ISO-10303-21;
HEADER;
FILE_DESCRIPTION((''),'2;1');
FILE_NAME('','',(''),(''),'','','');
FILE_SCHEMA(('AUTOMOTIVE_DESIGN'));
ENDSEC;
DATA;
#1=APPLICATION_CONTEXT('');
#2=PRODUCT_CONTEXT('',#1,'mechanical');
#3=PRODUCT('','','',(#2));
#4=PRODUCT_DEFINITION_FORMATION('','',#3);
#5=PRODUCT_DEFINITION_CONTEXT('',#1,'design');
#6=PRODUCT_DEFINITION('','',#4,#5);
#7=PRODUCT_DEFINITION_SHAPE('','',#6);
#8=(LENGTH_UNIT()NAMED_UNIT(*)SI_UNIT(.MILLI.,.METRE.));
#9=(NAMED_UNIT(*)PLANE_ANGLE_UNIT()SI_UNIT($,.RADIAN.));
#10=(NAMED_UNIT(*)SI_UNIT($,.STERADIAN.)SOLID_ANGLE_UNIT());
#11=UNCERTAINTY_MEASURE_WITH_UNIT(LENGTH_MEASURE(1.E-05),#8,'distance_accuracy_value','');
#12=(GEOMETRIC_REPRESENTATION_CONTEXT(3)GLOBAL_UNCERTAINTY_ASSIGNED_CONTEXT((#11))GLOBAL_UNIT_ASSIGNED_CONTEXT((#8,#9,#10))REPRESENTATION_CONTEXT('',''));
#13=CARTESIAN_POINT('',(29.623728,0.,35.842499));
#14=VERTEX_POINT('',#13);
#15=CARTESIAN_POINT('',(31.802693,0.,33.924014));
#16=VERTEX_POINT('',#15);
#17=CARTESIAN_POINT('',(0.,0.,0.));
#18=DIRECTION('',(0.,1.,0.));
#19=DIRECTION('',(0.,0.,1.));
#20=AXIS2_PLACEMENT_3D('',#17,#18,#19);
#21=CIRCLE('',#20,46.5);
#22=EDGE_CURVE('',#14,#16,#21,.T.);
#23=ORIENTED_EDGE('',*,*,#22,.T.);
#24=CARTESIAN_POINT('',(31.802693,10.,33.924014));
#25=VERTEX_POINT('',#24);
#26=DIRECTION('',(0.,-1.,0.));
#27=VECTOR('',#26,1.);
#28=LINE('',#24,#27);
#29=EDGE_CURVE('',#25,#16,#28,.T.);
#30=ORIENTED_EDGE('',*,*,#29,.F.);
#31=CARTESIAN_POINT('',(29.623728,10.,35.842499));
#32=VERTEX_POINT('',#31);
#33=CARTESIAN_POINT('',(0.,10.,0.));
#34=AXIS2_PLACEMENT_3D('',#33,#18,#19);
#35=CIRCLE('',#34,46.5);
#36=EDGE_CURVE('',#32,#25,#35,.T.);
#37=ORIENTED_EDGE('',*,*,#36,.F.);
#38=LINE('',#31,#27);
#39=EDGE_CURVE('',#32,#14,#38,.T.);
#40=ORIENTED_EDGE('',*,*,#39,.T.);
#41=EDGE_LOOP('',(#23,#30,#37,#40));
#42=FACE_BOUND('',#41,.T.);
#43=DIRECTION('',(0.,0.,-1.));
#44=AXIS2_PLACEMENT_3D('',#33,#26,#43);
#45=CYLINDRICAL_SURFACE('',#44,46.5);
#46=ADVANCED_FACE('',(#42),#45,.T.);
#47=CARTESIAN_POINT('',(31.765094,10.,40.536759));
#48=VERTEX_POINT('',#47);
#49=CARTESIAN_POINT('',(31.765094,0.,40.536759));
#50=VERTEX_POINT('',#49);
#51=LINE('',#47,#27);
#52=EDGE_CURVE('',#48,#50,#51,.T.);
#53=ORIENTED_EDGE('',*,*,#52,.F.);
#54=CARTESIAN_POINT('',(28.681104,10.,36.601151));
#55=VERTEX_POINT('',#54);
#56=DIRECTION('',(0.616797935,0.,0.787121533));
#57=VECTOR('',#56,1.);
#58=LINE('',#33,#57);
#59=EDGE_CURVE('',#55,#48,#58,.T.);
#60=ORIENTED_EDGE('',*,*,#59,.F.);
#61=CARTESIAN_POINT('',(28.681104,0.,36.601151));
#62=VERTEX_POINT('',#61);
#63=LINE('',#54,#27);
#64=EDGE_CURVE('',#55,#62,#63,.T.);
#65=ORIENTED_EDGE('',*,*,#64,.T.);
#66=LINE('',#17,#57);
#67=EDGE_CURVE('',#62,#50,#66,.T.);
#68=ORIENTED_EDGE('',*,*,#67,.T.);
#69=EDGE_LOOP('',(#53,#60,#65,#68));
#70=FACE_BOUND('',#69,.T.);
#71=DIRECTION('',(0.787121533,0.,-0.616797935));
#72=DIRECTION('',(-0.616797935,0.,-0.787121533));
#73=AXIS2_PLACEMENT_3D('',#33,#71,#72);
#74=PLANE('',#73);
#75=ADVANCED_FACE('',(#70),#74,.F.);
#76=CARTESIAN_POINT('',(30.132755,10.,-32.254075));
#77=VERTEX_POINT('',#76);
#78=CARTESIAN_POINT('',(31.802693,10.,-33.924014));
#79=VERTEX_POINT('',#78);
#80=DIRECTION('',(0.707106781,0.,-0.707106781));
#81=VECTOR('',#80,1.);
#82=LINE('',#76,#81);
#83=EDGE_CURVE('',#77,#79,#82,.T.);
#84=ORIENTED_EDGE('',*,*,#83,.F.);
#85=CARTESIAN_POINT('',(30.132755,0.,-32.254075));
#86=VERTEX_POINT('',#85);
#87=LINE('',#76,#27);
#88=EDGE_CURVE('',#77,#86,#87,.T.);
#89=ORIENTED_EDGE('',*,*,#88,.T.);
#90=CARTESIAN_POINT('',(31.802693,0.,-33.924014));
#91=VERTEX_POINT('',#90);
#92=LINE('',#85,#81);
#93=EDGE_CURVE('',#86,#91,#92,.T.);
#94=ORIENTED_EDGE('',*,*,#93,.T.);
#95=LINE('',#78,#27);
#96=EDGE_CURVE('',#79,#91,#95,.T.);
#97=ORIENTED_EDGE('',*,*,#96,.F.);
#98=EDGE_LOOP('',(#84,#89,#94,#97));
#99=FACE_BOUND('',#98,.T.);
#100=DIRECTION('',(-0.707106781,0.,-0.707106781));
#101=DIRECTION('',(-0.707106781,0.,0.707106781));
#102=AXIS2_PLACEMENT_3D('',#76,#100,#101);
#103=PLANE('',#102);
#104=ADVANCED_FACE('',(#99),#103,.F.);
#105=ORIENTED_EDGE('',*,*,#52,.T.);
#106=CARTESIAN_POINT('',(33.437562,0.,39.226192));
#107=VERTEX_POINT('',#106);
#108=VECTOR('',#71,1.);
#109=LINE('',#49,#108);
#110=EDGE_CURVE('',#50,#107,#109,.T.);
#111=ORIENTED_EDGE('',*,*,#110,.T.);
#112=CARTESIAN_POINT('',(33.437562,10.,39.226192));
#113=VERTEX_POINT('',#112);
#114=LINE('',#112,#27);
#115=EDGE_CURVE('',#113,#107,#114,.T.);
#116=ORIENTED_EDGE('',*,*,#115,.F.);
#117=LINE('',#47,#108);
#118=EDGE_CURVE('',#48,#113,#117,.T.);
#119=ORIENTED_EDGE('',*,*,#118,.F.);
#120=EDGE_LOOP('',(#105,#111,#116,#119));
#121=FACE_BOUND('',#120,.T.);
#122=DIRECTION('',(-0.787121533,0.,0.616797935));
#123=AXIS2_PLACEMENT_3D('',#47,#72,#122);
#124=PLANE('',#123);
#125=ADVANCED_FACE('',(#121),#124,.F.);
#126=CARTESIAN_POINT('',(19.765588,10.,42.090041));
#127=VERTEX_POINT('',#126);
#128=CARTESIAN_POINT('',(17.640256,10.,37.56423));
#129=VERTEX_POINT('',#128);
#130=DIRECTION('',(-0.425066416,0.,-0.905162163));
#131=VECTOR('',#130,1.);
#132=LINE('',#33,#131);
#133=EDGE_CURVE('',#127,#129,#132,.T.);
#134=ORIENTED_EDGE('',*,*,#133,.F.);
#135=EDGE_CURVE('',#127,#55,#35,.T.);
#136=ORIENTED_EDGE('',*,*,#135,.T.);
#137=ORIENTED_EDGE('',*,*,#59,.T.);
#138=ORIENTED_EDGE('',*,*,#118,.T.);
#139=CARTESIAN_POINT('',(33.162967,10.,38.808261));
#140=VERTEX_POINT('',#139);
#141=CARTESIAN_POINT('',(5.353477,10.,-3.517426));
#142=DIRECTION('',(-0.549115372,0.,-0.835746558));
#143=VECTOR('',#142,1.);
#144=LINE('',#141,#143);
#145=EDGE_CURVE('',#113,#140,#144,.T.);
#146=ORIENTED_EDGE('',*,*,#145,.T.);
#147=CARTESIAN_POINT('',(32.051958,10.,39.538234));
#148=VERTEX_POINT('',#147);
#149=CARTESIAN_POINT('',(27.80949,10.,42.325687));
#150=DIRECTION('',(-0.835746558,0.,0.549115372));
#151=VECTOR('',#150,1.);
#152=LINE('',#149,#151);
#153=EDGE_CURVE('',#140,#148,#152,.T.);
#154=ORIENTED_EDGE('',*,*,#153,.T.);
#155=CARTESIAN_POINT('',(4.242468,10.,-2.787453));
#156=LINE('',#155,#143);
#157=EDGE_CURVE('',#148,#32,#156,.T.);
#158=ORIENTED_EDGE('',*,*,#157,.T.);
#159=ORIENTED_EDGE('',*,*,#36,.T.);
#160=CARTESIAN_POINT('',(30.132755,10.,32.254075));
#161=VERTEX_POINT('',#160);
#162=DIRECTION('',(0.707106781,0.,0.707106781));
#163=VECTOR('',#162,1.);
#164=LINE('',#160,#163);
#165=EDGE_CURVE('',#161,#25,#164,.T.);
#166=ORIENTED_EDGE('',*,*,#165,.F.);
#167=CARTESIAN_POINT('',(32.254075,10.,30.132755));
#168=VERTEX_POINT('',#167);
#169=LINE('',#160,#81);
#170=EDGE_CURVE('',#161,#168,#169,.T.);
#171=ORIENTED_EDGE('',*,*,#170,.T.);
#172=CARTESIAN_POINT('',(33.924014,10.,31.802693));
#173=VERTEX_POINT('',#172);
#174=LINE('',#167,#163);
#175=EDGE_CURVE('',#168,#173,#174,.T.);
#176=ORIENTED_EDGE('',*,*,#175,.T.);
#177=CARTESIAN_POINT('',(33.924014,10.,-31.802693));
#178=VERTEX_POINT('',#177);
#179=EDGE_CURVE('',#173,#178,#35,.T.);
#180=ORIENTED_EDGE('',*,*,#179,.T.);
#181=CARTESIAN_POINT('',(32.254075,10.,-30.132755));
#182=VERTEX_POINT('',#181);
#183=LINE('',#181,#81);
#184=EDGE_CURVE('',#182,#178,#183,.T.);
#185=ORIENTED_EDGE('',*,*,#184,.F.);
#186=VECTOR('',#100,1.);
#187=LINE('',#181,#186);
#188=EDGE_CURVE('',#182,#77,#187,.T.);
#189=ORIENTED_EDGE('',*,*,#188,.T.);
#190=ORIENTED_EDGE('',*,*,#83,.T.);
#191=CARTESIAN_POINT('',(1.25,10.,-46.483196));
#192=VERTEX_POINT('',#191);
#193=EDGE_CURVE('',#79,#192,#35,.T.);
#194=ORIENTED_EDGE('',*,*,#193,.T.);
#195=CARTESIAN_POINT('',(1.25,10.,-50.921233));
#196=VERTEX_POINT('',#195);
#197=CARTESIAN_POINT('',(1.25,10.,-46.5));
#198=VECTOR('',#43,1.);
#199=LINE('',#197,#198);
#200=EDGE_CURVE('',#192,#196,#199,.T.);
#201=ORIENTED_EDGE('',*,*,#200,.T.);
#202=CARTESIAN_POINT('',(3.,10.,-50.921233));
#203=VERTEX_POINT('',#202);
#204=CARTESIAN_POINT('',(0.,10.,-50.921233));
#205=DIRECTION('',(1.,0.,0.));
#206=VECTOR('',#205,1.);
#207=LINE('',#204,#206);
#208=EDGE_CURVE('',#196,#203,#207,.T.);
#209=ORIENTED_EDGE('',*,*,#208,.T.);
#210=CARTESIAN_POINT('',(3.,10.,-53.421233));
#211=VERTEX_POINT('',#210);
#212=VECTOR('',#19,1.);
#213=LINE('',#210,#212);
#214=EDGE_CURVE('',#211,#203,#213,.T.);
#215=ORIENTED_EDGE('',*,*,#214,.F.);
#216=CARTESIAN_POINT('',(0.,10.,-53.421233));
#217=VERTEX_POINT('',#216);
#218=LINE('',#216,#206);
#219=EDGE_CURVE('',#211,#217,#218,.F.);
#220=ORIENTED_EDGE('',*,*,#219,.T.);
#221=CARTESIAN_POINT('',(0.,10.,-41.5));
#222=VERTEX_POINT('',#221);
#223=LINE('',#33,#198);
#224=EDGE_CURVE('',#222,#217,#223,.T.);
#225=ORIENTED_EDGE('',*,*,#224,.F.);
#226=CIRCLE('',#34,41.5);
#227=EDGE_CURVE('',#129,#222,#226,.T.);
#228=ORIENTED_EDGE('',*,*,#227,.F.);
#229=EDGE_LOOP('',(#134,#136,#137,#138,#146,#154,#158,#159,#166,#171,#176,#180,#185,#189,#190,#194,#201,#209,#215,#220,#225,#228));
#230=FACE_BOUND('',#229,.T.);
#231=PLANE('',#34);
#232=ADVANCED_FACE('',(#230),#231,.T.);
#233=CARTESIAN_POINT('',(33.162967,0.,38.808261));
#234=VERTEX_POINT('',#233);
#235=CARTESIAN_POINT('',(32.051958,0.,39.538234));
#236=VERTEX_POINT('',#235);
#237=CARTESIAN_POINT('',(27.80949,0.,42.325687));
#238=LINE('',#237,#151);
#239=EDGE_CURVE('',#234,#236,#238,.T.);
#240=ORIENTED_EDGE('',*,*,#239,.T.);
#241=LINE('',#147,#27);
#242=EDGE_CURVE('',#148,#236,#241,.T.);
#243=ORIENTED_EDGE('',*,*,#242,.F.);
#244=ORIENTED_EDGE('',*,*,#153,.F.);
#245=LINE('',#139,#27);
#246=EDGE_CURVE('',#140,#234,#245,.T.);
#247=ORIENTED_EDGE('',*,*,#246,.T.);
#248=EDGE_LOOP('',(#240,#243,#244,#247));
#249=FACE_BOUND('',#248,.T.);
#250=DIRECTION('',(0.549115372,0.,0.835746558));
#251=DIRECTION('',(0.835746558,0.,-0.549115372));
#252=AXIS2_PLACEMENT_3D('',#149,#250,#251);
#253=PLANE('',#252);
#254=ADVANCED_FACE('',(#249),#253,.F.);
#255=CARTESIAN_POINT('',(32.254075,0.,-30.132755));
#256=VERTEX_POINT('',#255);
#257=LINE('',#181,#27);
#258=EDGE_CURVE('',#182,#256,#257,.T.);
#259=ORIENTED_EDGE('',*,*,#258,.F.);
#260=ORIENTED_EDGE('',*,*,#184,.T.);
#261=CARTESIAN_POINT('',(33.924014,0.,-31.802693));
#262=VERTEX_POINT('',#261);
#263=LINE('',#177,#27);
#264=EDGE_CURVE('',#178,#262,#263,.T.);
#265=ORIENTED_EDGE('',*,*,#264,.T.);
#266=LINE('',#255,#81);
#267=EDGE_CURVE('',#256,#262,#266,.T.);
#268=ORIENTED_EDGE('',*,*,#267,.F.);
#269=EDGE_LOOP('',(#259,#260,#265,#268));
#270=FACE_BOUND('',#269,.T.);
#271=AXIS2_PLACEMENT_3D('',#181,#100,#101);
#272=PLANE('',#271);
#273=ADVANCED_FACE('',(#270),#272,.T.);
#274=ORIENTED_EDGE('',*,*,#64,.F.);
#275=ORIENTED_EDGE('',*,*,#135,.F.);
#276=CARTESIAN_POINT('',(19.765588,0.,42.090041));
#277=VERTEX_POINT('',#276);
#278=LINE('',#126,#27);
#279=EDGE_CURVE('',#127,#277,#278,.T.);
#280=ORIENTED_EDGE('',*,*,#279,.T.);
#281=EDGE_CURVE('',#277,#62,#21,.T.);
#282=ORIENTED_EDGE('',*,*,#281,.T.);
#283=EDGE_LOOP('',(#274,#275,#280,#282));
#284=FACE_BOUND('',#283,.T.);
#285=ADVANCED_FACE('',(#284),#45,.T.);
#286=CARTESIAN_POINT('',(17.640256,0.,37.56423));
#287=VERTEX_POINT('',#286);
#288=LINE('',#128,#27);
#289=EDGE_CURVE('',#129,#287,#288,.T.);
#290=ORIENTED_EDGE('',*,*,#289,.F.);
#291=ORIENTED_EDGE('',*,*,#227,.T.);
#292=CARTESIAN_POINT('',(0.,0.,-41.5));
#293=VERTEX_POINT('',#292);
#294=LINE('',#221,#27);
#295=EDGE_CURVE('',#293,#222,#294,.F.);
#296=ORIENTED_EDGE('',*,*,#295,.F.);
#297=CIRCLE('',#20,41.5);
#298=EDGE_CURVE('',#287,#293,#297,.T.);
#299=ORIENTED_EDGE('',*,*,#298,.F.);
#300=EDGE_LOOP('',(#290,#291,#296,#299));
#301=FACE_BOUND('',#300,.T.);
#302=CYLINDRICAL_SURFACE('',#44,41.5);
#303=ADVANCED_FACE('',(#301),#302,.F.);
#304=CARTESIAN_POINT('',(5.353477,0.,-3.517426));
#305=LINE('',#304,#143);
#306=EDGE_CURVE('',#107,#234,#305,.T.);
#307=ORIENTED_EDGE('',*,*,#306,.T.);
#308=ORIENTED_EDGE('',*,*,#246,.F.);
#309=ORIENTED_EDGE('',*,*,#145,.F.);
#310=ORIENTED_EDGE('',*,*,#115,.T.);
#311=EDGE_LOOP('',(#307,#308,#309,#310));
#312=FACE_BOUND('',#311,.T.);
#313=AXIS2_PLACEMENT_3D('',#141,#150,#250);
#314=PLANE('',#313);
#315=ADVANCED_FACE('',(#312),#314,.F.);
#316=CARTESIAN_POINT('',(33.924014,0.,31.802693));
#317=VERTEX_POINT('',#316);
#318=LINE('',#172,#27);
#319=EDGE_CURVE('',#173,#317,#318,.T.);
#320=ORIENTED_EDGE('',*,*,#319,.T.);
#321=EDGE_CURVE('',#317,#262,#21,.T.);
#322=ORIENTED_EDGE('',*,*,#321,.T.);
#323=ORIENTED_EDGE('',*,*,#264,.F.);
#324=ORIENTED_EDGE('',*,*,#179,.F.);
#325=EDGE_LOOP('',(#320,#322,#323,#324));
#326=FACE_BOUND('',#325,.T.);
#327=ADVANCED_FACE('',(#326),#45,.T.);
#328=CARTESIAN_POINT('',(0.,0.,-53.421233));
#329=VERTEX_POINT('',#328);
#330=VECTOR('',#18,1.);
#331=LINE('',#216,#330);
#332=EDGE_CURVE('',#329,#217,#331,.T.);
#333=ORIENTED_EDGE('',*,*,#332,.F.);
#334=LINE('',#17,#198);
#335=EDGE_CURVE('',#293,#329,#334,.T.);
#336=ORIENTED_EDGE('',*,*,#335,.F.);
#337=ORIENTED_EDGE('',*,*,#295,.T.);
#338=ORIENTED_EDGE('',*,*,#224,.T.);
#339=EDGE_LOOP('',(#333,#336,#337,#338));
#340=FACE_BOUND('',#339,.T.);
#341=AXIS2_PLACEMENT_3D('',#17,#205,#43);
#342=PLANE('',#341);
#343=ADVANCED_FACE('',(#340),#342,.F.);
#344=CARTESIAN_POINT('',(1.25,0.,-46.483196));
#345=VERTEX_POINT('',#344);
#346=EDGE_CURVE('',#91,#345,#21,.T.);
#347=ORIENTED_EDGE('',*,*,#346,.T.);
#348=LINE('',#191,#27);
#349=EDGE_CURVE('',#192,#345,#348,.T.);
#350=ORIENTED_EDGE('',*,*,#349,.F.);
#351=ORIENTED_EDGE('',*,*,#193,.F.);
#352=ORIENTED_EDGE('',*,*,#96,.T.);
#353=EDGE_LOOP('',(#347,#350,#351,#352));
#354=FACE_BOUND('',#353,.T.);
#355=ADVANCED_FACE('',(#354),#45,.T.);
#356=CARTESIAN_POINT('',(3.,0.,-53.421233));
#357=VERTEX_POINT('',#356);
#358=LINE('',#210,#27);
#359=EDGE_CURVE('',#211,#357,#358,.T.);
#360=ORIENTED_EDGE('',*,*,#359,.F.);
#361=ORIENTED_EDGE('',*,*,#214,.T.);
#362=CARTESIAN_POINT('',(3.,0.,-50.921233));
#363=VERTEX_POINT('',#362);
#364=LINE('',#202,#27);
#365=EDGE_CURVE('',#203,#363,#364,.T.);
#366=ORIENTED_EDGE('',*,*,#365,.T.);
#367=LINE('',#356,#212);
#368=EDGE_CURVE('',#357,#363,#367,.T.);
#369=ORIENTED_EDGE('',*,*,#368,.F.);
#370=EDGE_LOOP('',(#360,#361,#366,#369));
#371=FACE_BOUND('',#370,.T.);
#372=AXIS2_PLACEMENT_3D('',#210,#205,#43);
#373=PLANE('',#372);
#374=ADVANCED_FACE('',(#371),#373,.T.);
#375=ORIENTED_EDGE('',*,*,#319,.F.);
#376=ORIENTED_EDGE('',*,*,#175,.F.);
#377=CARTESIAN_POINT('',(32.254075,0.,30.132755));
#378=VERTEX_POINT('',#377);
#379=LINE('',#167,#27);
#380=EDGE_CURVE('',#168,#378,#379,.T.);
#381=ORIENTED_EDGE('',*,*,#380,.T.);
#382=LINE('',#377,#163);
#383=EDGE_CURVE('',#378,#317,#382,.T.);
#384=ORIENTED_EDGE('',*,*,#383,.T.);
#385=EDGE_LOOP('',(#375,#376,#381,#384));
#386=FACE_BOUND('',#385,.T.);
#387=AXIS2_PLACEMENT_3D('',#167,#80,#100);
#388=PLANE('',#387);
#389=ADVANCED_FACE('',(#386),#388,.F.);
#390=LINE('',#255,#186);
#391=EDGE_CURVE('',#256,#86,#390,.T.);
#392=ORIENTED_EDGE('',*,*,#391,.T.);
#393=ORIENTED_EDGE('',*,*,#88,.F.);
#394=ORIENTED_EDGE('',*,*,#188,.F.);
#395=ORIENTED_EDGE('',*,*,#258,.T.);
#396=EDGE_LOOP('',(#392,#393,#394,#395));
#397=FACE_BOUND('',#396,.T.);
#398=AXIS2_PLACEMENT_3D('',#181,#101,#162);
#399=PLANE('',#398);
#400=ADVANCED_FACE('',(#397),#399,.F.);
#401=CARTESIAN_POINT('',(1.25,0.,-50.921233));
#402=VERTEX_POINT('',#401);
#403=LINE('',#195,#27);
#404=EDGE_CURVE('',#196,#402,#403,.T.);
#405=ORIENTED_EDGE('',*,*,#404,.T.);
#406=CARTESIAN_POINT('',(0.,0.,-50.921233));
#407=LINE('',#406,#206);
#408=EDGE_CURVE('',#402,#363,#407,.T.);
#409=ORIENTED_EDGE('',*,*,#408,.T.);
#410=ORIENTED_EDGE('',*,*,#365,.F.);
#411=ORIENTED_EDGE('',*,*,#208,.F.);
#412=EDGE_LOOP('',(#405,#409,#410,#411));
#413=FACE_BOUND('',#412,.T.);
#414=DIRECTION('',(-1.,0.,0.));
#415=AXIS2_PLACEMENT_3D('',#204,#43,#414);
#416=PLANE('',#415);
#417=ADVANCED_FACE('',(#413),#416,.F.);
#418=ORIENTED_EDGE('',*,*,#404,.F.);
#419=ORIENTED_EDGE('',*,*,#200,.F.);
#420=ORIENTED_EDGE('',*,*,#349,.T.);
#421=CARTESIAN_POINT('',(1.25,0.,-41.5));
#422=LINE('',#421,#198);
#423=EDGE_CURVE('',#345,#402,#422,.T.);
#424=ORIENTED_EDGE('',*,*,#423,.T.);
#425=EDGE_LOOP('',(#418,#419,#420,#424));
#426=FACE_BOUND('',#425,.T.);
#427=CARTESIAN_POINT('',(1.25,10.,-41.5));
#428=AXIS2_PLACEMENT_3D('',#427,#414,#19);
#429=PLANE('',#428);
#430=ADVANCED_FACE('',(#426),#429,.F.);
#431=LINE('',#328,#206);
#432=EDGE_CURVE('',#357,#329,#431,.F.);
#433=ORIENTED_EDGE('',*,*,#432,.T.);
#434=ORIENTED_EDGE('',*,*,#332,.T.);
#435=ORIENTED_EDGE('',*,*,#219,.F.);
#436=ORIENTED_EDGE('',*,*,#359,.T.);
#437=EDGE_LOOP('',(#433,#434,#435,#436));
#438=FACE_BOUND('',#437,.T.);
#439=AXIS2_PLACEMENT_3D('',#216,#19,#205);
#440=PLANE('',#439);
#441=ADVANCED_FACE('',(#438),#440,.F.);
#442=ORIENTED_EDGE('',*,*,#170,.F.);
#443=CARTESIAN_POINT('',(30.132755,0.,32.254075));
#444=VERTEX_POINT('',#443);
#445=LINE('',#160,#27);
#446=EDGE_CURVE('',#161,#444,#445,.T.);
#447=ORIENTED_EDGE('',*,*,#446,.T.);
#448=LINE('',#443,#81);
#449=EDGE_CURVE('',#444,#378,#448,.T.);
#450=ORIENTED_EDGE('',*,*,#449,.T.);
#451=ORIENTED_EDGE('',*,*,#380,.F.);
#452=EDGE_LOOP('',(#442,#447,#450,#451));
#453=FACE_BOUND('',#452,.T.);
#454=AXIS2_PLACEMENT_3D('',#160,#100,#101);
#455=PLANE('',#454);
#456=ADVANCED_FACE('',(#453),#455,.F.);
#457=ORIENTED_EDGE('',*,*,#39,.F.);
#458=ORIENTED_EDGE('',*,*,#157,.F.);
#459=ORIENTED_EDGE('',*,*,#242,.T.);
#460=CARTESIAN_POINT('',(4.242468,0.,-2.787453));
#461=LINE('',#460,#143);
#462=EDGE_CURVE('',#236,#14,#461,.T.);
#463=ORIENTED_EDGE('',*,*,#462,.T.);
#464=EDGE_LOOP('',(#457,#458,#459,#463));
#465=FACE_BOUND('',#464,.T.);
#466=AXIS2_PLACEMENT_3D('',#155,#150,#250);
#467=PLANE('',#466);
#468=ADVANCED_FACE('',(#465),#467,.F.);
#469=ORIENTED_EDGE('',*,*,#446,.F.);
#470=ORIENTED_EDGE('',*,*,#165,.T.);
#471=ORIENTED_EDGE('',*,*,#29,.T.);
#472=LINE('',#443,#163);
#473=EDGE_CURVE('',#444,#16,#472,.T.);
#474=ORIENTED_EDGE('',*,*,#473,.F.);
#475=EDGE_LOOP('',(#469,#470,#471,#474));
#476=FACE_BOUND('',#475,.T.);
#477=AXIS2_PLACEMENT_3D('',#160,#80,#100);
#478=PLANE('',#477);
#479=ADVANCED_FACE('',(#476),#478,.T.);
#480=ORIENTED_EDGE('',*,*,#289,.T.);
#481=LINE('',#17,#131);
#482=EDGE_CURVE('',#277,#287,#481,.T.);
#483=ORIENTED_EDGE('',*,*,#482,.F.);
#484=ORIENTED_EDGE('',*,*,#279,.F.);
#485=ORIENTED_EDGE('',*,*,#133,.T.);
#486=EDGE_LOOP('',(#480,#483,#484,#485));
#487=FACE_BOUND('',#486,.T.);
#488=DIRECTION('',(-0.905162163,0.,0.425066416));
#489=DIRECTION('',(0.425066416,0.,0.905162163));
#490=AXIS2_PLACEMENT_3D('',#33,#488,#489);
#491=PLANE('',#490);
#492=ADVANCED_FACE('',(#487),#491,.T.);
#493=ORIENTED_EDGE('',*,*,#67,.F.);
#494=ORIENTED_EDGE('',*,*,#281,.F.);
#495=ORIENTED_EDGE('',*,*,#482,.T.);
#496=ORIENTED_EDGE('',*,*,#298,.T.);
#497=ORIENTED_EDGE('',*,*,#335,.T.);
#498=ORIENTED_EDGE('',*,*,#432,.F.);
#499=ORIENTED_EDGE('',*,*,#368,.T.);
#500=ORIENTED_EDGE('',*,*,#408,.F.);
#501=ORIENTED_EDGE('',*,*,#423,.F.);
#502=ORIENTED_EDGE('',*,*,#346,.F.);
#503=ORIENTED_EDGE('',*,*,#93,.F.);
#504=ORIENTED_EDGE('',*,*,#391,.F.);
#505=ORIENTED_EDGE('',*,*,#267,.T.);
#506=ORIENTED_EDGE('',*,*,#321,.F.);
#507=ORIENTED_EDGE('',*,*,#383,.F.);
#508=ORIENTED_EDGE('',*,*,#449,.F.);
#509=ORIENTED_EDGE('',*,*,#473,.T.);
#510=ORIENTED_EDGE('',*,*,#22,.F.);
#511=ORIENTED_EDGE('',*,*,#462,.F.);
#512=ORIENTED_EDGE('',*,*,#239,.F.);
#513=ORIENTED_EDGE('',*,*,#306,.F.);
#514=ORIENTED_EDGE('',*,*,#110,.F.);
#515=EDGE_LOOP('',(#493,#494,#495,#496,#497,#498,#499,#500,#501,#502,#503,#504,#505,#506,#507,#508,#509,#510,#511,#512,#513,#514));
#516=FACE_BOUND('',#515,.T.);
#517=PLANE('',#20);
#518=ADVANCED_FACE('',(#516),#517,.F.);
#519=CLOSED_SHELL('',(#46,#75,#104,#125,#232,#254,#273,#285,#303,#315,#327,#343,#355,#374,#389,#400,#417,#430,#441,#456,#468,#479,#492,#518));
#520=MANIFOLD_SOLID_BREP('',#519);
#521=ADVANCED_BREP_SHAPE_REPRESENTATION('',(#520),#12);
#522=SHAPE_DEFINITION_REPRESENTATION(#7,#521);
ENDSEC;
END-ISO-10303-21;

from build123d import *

# Parameters (mm, degrees)
BOSS_EXTRUDE1_DEPTH     = 10
EXTRUDE_THIN1_DEPTH     = 10
CUT_EXTRUDE_THIN2_DEPTH = 10
BOSS_EXTRUDE2_DEPTH     = 10


# Read off the part's stored shape, not the designer's step: Extrude-Thin1
with BuildPart() as part:
    # Sketch1 → Boss-Extrude1 (new body)
    with BuildSketch(Plane(origin=(0, 0, 0), x_dir=(1, 0, 0), z_dir=(0, 1, 0))):
        with BuildLine():
            ThreePointArc((-17.640256265, -37.564229779), (0, 41.5), (17.640256265, -37.564229779))
            Line((17.640256265, -37.564229779), (19.765588345, -42.090040596))
            ThreePointArc((19.765588345, -42.090040596), (24.378319794, -39.597317132), (28.681103985, -36.601151269))
            Line((28.681103985, -36.601151269), (29.481767388, -35.626435952))
            Line((29.481767388, -35.626435952), (29.623728376, -35.842498756))
            ThreePointArc((29.623728376, -35.842498756), (-5.835552757, 46.132378261), (-19.765588345, -42.090040596))
            Line((-19.765588345, -42.090040596), (-17.640256265, -37.564229779))
        make_face()
    extrude(amount=BOSS_EXTRUDE1_DEPTH)

    # Extrude-Thin1 outline → Extrude-Thin1 (add)
    with BuildSketch(Plane(origin=(0, 0, 0), x_dir=(1, 0, 0), z_dir=(0, 1, 0))):
        with BuildLine():
            Line((-3, 50.921232979), (-1.25, 50.921232979))
            Line((-1.25, 50.921232979), (-1.25, 46.483195888))
            ThreePointArc((-1.25, 46.483195888), (0, 46.5), (1.25, 46.483195888))
            Line((1.25, 46.483195888), (1.25, 50.921232979))
            Line((1.25, 50.921232979), (3, 50.921232979))
            Line((3, 50.921232979), (3, 53.421232979))
            Line((3, 53.421232979), (-3, 53.421232979))
            Line((-3, 53.421232979), (-3, 50.921232979))
        make_face()
    extrude(amount=EXTRUDE_THIN1_DEPTH)

    # SurfaceCut1
    split(bisect_by=Plane(origin=(0, 0, 0), x_dir=(0, 0, -1), z_dir=(1, 0, 0)), keep=Keep.TOP)

    # Sketch3 → Cut-Extrude-Thin2 (cut)
    with BuildSketch(Plane(origin=(0, 0, 0), x_dir=(1, 0, 0), z_dir=(0, 1, 0))):
        Polygon((32.254075142, 30.132754798), (35.916621941, 33.795301597), (33.795301597, 35.916621941), (30.132754798, 32.254075142), align=None)
        Polygon((30.132754798, -32.254075142), (33.795301597, -35.916621941), (35.916621941, -33.795301597), (32.254075142, -30.132754798), align=None)
    extrude(amount=CUT_EXTRUDE_THIN2_DEPTH, mode=Mode.SUBTRACT)

    # Sketch1<6> → Boss-Extrude2 (add)
    with BuildSketch(Plane(origin=(0, 0, 0), x_dir=(1, 0, 0), z_dir=(0, 1, 0))):
        with BuildLine():
            Line((32.051958284, -39.538233554), (29.623728376, -35.842498756))
            ThreePointArc((29.623728376, -35.842498756), (29.15488394, -36.2248912), (28.681103985, -36.601151269))
            Line((28.681103985, -36.601151269), (31.765093661, -40.536758932))
            Line((31.765093661, -40.536758932), (33.437562335, -39.226192289))
            Line((33.437562335, -39.226192289), (33.162966722, -38.808261285))
            Line((33.162966722, -38.808261285), (32.051958284, -39.538233554))
        make_face()
        with BuildLine():
            ThreePointArc((28.681103985, -36.601151269), (29.15488394, -36.2248912), (29.623728376, -35.842498756))
            Line((29.623728376, -35.842498756), (29.481767388, -35.626435952))
            Line((29.481767388, -35.626435952), (28.681103985, -36.601151269))
        make_face()
    extrude(amount=BOSS_EXTRUDE2_DEPTH)


solid = part.part
